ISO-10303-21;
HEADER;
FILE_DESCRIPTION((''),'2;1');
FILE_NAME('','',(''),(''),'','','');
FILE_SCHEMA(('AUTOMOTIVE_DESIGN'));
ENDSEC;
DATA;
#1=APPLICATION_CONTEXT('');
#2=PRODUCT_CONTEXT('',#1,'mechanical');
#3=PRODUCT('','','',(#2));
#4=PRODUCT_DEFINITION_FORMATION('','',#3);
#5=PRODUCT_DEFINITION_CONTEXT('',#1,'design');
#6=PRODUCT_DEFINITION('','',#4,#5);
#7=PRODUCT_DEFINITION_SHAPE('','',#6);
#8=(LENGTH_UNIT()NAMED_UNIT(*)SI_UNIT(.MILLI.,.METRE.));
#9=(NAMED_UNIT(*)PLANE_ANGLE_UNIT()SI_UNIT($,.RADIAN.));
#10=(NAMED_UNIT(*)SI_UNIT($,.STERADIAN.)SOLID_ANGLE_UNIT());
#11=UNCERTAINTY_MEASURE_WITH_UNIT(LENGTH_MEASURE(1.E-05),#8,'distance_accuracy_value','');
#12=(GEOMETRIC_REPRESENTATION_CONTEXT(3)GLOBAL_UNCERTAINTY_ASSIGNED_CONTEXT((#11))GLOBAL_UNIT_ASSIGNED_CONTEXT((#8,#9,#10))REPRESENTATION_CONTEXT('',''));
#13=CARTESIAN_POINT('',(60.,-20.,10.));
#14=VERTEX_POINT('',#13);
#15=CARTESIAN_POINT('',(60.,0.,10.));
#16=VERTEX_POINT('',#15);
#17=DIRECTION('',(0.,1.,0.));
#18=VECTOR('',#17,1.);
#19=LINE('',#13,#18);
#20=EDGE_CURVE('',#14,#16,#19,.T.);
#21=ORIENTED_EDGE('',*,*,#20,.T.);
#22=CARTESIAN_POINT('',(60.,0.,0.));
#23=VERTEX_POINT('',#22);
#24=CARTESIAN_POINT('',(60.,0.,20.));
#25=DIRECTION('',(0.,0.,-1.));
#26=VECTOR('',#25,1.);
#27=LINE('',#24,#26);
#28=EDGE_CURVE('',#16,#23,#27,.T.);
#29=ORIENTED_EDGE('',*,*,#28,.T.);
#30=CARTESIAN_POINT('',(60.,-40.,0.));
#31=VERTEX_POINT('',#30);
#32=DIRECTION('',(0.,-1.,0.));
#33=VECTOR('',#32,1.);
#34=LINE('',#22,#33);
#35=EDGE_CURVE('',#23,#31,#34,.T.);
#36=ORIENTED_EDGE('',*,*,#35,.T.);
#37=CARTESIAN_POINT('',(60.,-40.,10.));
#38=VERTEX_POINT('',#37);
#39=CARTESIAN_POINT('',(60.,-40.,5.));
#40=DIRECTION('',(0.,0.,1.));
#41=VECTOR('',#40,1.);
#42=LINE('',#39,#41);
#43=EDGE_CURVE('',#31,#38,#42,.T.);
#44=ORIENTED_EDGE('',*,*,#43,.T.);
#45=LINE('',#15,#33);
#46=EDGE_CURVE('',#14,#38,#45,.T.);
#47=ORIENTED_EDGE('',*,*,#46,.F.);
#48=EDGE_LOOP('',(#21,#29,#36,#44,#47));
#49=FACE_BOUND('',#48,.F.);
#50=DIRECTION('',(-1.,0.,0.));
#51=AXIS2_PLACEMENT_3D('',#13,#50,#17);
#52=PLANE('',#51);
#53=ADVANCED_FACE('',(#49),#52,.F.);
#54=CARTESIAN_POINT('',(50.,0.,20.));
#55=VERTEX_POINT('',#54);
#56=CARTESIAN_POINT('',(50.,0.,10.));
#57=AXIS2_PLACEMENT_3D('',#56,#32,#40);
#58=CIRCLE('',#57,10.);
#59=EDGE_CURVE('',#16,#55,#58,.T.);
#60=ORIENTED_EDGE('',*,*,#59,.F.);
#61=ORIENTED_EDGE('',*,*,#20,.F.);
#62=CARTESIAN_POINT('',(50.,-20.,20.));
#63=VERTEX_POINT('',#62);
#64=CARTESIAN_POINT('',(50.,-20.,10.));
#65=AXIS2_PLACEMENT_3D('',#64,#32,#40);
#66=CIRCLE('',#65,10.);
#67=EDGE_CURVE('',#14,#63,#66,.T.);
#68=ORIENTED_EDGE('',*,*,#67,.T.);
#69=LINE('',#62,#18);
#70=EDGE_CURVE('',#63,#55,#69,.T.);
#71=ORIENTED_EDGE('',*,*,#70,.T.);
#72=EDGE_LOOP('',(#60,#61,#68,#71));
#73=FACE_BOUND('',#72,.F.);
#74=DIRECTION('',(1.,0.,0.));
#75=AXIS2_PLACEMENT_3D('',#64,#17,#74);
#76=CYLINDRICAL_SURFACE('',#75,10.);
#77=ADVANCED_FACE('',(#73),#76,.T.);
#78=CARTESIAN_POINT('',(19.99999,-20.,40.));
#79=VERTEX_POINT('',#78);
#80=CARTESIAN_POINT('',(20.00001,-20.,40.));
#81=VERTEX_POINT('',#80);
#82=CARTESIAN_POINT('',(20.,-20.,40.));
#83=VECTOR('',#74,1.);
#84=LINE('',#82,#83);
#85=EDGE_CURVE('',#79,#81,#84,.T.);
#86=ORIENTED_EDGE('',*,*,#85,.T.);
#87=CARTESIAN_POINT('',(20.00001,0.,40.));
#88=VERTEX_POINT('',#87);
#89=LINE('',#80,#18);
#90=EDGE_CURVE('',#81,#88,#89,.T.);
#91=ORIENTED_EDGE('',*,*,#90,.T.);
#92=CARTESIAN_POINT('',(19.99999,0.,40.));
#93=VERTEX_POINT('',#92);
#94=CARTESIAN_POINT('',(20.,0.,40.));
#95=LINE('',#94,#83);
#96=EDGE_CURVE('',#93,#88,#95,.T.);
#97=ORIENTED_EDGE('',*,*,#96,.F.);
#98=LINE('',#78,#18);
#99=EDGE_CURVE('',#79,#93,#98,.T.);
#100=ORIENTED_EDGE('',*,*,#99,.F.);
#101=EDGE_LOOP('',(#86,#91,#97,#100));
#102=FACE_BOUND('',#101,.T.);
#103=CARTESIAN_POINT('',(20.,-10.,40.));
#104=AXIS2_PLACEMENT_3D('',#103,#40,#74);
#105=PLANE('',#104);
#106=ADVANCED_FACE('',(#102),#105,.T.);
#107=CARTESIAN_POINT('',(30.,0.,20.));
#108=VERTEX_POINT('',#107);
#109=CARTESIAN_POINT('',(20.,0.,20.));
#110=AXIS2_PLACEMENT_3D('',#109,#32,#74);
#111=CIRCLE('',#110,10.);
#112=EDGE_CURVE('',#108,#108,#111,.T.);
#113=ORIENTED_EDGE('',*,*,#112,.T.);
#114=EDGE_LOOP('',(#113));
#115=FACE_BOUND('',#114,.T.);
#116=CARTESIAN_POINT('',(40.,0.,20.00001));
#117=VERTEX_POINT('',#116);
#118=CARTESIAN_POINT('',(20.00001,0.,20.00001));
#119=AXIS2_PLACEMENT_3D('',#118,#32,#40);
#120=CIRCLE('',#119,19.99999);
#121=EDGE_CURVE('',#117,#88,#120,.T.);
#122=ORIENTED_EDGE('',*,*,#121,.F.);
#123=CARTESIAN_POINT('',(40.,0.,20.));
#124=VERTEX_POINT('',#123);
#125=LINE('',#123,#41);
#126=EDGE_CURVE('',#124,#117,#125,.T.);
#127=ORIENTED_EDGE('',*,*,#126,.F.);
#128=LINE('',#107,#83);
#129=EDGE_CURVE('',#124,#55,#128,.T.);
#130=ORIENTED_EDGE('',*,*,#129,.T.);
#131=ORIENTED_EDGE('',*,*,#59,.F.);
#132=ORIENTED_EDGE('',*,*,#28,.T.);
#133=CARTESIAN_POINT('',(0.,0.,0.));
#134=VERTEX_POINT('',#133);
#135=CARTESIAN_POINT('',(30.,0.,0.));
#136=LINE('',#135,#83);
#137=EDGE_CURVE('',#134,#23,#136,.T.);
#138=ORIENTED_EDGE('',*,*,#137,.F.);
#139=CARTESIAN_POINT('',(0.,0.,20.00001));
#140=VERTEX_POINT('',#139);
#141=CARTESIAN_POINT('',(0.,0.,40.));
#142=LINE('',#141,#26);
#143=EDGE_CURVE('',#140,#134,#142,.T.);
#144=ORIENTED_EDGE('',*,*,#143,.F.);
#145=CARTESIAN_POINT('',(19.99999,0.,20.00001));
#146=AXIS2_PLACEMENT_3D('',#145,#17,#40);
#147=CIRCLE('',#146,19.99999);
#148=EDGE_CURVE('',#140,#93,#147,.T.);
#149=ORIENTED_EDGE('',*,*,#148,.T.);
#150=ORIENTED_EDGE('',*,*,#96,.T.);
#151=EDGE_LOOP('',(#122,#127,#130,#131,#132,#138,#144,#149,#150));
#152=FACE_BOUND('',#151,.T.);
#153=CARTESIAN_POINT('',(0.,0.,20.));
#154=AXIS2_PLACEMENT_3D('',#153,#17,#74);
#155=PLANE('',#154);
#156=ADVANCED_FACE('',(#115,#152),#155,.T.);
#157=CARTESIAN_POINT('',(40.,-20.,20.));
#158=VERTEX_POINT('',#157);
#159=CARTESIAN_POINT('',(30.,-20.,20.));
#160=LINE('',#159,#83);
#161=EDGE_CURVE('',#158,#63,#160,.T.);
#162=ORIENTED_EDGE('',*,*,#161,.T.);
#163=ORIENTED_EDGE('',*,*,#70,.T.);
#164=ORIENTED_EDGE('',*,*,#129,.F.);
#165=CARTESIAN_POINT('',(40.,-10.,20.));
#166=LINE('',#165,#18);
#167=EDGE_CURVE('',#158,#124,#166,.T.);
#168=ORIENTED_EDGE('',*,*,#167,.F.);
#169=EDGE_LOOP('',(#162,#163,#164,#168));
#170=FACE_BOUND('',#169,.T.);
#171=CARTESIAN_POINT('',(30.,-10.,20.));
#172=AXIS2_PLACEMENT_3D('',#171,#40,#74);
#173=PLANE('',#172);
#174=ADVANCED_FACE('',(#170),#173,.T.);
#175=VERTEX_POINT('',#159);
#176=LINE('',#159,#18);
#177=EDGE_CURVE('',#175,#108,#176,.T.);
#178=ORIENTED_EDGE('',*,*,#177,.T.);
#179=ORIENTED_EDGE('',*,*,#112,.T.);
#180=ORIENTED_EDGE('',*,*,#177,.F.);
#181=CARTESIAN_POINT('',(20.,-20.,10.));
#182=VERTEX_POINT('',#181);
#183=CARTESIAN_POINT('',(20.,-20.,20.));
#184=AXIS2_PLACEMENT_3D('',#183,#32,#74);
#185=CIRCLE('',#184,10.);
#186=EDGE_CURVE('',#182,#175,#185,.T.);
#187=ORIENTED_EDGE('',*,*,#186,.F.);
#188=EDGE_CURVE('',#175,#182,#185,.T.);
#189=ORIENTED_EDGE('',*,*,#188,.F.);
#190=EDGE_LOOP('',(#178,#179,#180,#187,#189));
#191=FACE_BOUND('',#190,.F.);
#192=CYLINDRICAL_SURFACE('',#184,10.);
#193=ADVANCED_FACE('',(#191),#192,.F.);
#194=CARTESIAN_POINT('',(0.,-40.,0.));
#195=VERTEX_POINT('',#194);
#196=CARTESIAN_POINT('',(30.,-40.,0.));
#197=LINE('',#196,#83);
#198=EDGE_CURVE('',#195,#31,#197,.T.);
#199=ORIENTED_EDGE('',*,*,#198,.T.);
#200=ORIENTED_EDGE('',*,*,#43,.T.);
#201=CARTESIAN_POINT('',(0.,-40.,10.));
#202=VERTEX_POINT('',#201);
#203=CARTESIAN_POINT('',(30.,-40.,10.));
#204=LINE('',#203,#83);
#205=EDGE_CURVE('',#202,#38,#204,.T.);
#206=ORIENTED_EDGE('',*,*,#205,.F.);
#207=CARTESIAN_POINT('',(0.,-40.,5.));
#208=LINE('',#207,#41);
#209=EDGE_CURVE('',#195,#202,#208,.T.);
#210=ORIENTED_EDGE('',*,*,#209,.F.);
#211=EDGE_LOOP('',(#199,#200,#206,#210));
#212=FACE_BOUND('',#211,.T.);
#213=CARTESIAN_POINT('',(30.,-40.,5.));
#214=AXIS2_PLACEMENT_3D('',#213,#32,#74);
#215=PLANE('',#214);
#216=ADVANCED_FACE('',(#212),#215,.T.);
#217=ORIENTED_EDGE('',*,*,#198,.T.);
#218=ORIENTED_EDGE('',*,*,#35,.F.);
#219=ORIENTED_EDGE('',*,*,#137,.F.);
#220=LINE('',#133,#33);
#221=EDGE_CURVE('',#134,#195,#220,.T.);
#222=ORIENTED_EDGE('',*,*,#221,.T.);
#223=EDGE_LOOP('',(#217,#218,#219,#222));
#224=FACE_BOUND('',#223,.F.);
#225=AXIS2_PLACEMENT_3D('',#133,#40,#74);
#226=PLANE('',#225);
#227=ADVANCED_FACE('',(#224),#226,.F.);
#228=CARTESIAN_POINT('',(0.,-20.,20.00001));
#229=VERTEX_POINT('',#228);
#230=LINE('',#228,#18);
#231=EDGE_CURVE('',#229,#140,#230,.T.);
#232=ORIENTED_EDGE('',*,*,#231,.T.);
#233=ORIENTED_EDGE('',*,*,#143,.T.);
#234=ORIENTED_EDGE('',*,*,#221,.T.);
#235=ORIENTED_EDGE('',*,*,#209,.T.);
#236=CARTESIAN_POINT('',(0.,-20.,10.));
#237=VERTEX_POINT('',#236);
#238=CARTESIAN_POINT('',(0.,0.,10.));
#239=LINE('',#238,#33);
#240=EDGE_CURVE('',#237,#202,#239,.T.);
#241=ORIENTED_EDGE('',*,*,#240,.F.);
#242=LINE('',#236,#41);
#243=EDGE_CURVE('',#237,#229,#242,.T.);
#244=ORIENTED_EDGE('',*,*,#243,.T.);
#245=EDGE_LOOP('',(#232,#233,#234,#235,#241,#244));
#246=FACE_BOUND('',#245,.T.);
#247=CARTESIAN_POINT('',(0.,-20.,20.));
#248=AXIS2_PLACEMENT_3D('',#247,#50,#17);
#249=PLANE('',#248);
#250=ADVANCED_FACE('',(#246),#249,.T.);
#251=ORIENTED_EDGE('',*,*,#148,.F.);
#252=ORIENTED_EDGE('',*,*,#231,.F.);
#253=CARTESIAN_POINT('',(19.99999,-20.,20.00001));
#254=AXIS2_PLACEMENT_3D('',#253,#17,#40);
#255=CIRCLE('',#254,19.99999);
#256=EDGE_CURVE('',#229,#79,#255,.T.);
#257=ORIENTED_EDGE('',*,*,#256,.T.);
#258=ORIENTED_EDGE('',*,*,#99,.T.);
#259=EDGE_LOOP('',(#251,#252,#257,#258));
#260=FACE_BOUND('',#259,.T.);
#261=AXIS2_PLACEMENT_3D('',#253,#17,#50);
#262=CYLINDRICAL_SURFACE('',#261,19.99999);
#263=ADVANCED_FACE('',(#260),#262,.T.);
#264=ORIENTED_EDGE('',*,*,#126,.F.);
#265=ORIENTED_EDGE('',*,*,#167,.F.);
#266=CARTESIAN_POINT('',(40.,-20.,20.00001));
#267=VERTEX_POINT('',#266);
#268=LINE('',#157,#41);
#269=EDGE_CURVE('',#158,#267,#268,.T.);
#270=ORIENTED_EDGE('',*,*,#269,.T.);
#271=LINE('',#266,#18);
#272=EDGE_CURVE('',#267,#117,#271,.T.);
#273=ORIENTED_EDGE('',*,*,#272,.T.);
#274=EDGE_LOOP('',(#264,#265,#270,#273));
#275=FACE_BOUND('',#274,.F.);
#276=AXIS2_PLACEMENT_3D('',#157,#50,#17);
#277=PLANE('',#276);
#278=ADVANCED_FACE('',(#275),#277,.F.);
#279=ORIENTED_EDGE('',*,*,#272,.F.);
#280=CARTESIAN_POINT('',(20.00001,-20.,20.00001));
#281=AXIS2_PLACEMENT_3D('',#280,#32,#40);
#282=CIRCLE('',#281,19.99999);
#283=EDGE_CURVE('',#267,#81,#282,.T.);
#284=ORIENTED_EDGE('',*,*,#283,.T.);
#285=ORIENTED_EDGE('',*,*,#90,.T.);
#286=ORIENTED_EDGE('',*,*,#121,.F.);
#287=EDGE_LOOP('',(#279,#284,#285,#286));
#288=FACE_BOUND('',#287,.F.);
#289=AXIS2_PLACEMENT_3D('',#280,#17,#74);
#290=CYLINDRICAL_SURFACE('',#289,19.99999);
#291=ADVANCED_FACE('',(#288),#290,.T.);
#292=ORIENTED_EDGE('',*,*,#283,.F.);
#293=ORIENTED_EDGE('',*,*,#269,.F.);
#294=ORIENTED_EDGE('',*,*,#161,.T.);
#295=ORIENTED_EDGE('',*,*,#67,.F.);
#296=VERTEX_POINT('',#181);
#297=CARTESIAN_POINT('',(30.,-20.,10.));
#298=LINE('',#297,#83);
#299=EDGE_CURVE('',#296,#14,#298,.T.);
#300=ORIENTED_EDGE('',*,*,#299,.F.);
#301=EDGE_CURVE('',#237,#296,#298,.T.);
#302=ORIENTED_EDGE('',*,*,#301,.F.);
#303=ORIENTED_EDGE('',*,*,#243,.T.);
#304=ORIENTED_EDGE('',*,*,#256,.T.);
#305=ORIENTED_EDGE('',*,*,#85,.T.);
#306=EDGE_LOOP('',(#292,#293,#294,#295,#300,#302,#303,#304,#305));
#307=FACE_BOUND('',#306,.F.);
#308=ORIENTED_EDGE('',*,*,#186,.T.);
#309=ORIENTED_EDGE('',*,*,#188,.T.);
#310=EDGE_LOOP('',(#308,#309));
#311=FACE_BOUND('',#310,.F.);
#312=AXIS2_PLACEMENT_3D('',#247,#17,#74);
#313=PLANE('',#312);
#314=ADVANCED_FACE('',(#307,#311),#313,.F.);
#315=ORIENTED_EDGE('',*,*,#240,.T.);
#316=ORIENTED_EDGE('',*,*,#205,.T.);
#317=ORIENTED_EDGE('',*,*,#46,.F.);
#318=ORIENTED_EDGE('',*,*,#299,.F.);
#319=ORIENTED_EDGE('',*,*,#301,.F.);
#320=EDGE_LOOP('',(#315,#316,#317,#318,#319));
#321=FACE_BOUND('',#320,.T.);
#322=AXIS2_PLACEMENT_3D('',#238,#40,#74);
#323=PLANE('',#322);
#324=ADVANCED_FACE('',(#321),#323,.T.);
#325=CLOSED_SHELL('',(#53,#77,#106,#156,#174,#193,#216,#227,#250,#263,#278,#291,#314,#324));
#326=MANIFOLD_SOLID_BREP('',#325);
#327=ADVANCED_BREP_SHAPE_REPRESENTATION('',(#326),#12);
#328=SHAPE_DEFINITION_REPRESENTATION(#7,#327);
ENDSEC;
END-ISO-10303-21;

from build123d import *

# Parameters (mm, degrees)
F0_W     = 60
F0_H     = 10
F1_DEPTH = 40
F2_W     = 60
F2_H     = 20
F3_DEPTH = 10
F4_W     = 40
F4_H     = 20
F5_DEPTH = 20
F6_R     = 19.99999
F7_R     = 10
F8_R     = 10
F9_DEPTH = 25


# Not quite as in the source:
# - a fillet or chamfer is up to 0.001 mm smaller than in the source, because OpenCascade refuses the exact size


with BuildPart() as f1:
    # F0 (on Front) → F1 (new body)
    with BuildSketch(Plane.XZ):
        with Locations((30, 5)):
            Rectangle(F0_W, F0_H)
    extrude(amount=F1_DEPTH)

    # F2 (on face) → F3 (join)
    with BuildSketch(Plane.XY.offset(10)):
        with Locations((30, -10)):
            Rectangle(F2_W, F2_H)
    extrude(amount=F3_DEPTH)

    # F4 (on face) → F5 (join)
    with BuildSketch(Plane.XY.offset(20)):
        with Locations((20, -10)):
            Rectangle(F4_W, F4_H)
    extrude(amount=F5_DEPTH)

    # F6 (radius 20 in the source; OpenCascade refuses exactly that, so slightly less here)
    f6_edges = [f1.edges().sort_by_distance(p)[0] for p in [
        (0, -10, 40),
        (40, -10, 40),
    ]]
    fillet(f6_edges, radius=F6_R)

    # F7
    f7_edges = [f1.edges().sort_by_distance(p)[0] for p in [
        (60, -10, 20),
    ]]
    fillet(f7_edges, radius=F7_R)

    # F8 (on face) → F9 (cut)
    with BuildSketch(Plane.XZ.offset(20)):
        with Locations((20, 20)):
            Circle(F8_R)
    extrude(amount=-F9_DEPTH, mode=Mode.SUBTRACT)


solid = f1.part
